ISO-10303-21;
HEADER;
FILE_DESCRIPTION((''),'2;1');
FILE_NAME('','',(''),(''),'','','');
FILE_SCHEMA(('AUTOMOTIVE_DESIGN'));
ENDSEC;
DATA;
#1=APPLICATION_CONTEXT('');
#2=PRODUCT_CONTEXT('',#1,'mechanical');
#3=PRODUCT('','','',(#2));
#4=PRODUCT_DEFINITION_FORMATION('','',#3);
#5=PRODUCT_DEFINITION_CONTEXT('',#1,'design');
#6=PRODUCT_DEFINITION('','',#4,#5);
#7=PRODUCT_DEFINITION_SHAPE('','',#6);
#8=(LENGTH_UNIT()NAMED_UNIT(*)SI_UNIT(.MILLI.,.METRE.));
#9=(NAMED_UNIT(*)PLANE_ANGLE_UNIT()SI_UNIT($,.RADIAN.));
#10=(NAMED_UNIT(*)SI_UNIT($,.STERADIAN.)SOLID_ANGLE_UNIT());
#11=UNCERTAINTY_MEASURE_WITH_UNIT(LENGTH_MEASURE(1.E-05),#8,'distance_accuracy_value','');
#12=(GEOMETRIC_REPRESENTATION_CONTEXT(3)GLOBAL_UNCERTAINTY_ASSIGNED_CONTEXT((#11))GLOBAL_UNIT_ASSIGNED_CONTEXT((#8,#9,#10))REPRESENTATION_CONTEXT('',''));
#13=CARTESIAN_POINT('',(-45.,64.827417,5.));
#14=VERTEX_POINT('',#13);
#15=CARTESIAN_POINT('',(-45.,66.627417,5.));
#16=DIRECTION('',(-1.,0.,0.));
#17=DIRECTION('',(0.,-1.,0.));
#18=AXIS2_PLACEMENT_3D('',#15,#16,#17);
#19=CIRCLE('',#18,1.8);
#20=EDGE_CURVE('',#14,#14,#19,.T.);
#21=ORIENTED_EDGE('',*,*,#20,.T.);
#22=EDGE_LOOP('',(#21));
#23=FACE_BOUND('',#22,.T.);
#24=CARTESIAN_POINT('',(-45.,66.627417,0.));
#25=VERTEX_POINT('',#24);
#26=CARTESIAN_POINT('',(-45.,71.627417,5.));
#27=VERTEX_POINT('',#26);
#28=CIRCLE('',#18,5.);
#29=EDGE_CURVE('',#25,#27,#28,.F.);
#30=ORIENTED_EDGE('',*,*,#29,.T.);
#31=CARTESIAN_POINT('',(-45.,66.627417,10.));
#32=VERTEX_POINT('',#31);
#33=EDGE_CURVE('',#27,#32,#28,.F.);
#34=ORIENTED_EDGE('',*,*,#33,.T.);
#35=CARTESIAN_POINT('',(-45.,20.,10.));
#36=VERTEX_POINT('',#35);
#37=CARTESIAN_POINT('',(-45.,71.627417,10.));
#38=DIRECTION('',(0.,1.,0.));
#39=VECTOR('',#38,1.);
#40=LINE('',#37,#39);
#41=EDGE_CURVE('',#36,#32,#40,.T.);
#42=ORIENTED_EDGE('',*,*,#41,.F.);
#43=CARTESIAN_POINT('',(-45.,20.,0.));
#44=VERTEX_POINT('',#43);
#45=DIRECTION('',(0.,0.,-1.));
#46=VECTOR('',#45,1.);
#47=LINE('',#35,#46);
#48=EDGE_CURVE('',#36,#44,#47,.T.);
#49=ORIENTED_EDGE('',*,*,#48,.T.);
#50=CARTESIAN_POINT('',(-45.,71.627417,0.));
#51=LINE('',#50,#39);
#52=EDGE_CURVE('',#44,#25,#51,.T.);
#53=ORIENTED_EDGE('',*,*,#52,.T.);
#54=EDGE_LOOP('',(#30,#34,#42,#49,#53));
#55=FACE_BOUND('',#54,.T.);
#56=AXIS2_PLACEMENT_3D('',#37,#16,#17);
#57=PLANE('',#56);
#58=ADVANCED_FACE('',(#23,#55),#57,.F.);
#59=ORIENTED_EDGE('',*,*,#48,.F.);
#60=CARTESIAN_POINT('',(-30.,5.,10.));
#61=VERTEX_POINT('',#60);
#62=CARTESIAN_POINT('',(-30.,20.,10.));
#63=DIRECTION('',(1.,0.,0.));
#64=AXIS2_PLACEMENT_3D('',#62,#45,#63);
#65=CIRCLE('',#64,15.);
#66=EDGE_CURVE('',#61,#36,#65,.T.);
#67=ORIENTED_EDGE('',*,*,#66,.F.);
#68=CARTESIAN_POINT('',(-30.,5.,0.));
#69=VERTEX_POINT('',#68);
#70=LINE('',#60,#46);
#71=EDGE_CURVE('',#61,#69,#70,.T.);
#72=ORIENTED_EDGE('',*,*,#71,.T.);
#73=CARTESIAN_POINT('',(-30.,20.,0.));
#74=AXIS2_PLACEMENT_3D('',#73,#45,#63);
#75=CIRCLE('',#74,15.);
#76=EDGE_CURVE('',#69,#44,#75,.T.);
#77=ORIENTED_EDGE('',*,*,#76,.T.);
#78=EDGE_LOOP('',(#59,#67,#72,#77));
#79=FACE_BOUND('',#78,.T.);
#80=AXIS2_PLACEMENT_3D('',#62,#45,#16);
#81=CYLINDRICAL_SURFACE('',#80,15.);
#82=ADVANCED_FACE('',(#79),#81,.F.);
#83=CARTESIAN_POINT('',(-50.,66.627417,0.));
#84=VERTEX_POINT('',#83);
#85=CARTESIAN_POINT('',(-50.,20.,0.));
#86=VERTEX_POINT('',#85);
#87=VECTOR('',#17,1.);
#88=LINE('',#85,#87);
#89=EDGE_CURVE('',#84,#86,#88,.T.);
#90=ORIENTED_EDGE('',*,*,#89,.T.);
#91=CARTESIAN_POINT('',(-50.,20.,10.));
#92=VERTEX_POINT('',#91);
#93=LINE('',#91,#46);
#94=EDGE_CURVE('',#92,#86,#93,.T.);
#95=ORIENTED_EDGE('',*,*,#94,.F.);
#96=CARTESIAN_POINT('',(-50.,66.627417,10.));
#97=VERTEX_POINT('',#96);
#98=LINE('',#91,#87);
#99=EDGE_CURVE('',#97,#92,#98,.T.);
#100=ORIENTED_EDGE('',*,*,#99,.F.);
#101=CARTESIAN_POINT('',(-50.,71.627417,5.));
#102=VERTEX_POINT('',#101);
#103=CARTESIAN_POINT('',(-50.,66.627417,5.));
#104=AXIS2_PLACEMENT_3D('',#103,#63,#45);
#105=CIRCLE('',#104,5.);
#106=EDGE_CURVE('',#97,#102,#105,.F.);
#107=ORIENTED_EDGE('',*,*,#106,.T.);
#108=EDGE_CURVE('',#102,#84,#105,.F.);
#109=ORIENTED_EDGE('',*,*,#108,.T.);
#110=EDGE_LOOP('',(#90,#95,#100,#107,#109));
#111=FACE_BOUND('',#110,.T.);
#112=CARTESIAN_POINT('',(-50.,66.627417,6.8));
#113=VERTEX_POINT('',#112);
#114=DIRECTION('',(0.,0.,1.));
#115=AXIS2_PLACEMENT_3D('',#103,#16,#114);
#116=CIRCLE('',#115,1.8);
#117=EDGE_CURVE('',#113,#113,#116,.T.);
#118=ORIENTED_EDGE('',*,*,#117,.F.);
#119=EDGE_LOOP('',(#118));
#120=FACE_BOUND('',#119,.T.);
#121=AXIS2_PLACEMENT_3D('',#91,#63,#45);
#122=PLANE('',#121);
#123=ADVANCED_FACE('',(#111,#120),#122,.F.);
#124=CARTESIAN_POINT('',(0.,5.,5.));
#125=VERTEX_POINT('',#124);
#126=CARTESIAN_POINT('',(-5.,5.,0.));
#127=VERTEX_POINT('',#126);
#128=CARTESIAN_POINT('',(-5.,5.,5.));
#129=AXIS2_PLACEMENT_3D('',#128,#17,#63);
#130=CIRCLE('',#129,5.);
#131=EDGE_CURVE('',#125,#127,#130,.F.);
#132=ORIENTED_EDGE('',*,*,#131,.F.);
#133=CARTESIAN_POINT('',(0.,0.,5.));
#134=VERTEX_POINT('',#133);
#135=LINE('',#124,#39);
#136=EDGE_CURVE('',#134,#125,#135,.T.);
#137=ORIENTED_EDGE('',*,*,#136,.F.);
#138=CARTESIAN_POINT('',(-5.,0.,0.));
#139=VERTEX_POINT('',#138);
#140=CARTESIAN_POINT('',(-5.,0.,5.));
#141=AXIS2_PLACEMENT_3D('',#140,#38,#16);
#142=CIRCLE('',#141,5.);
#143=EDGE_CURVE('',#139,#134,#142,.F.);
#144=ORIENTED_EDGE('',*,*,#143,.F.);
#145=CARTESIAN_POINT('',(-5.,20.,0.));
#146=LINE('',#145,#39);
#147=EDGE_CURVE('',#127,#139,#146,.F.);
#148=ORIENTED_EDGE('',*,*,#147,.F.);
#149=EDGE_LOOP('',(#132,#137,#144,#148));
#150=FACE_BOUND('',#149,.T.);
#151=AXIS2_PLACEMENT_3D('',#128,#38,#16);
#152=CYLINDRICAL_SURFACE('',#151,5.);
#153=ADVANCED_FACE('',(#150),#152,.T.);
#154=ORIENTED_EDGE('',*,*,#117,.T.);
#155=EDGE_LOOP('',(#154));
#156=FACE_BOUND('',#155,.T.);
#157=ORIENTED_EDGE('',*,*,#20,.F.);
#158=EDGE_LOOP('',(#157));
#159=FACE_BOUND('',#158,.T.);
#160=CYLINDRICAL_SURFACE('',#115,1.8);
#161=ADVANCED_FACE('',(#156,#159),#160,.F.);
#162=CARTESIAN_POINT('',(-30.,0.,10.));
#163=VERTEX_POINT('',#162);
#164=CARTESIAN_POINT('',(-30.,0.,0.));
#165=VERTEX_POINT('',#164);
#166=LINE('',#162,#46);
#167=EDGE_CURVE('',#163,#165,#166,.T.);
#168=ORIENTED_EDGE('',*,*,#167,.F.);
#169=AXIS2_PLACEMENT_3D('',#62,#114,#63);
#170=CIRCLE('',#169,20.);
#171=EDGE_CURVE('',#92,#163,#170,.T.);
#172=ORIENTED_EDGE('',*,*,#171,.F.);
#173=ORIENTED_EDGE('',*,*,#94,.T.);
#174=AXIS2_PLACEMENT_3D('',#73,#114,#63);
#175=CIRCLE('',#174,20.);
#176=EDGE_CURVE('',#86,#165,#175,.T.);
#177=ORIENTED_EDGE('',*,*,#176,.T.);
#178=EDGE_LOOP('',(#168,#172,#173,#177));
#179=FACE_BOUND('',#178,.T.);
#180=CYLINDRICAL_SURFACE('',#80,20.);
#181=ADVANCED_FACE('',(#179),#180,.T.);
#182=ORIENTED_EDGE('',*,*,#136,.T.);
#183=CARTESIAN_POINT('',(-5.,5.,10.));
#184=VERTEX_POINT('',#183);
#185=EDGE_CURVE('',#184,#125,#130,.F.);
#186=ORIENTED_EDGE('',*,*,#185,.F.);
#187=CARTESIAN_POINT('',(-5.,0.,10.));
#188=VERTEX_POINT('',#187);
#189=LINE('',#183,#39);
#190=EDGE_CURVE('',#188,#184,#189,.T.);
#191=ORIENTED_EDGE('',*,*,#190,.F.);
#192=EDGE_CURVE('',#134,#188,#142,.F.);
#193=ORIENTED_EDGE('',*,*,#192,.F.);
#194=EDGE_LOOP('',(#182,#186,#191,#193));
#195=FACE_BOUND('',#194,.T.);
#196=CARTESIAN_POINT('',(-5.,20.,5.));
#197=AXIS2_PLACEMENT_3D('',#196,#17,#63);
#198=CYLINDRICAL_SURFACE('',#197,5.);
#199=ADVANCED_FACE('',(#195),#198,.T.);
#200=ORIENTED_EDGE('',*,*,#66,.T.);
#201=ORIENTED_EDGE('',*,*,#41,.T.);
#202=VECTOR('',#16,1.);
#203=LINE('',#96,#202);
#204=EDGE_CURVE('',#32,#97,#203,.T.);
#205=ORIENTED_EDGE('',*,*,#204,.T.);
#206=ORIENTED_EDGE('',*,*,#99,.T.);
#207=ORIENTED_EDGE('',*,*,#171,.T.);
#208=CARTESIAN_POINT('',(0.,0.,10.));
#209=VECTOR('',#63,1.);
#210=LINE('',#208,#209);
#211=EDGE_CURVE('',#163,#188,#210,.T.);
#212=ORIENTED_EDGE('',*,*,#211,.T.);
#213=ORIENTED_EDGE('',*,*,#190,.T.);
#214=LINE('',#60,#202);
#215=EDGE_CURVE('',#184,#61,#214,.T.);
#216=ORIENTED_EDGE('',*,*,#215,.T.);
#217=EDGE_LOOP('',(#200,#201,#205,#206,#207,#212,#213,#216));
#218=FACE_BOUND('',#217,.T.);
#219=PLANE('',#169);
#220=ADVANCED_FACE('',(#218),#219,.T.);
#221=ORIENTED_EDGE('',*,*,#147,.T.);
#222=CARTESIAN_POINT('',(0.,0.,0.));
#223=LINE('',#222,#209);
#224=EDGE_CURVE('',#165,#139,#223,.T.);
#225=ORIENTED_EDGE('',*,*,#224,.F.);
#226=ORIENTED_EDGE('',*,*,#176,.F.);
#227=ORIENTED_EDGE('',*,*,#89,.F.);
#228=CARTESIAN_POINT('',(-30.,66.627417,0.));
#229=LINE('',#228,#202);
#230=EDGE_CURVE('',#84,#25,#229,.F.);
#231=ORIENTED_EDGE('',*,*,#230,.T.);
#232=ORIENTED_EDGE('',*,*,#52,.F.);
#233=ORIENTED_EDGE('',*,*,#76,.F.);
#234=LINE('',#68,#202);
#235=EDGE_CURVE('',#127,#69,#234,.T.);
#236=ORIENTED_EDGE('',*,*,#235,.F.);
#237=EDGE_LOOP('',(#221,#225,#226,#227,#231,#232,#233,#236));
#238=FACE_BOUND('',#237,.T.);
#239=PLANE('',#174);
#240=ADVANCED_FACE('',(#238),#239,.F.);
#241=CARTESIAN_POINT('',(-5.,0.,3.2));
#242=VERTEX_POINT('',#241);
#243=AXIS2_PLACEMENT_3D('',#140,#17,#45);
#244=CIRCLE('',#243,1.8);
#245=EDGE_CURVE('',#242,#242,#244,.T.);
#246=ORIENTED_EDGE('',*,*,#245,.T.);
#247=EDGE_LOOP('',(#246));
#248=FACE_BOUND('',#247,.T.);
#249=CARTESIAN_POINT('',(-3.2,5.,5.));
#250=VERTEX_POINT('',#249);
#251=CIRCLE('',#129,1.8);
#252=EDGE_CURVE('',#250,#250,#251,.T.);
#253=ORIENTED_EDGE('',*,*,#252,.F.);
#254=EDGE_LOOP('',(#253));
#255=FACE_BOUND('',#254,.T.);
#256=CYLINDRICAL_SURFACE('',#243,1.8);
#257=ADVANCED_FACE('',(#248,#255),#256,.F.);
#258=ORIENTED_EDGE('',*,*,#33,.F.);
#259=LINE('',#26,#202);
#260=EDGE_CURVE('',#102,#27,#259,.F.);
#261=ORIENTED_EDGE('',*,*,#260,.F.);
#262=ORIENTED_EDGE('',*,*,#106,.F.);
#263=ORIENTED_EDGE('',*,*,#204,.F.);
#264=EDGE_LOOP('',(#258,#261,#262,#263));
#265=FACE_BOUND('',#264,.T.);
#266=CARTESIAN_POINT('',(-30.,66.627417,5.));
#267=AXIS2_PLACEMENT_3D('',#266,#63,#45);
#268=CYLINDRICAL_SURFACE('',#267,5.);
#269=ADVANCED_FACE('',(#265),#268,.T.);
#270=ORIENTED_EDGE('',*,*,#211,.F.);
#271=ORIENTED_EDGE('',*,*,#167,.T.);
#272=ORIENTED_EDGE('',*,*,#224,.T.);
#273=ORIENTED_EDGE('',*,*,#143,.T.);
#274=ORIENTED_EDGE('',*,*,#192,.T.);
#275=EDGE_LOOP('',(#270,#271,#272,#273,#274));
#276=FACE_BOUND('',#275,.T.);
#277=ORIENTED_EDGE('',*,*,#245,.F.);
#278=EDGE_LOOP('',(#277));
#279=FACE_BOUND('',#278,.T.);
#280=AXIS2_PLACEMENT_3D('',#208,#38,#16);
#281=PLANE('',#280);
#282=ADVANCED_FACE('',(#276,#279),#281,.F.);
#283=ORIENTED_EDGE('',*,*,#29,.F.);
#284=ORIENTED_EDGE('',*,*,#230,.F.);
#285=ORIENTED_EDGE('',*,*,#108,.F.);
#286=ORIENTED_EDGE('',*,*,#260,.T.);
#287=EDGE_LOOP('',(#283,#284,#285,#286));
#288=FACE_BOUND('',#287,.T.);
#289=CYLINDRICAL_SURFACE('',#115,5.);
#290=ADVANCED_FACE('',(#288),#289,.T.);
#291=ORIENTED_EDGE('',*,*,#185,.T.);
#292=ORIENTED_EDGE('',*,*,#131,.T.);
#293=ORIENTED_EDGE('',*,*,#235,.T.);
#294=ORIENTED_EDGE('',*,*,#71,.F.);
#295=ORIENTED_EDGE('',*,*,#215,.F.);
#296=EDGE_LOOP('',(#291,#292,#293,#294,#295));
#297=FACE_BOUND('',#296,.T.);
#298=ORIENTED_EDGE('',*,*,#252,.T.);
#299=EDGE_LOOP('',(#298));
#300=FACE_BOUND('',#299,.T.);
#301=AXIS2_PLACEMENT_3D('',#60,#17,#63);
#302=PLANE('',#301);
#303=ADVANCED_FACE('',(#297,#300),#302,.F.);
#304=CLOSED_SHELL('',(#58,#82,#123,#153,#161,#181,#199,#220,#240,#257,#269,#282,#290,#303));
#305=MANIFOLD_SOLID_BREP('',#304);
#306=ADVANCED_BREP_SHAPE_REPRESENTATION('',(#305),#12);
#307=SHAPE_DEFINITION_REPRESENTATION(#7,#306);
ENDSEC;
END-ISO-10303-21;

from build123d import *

# Parameters (mm, degrees)
BOSS_EXTRUDE1_DEPTH  = 10
FILLET1_R            = 5
M3_CLEARANCE_HOLE1_D = 3.6
M3_CLEARANCE_HOLE2_D = 3.6


with BuildPart() as part:
    # Sketch3 → Boss-Extrude1 (new body)
    with BuildSketch(Plane.XY):
        with BuildLine():
            Line((0, 0), (-30, 0))
            ThreePointArc((-30, 0), (-44.142135624, 5.857864376), (-50, 20))
            Line((-50, 20), (-50, 71.627417))
            Line((-50, 71.627417), (-45, 71.627417))
            Line((-45, 71.627417), (-45, 20))
            ThreePointArc((-45, 20), (-40.606601718, 9.393398282), (-30, 5))
            Line((-30, 5), (0, 5))
            Line((0, 5), (0, 0))
        make_face()
    extrude(amount=BOSS_EXTRUDE1_DEPTH)

    # Fillet1
    fillet1_edges = [part.edges().sort_by_distance(p)[0] for p in [
        (0, 2.5, 10),
        (0, 2.5, 0),
        (-47.5, 71.627417, 0),
        (-47.5, 71.627417, 10),
    ]]
    fillet(fillet1_edges, radius=FILLET1_R - 0.0001)  # a hair under: the kernel refuses the full size

    # M3 Clearance Hole1 (through all)
    with Locations(Plane.XZ):
        with Locations((-5, 5)):
            Hole(M3_CLEARANCE_HOLE1_D / 2)

    # M3 Clearance Hole2 (through all)
    with Locations(Plane.ZY.offset(50)):
        with Locations((5, 66.627417)):
            Hole(M3_CLEARANCE_HOLE2_D / 2)


solid = part.part
